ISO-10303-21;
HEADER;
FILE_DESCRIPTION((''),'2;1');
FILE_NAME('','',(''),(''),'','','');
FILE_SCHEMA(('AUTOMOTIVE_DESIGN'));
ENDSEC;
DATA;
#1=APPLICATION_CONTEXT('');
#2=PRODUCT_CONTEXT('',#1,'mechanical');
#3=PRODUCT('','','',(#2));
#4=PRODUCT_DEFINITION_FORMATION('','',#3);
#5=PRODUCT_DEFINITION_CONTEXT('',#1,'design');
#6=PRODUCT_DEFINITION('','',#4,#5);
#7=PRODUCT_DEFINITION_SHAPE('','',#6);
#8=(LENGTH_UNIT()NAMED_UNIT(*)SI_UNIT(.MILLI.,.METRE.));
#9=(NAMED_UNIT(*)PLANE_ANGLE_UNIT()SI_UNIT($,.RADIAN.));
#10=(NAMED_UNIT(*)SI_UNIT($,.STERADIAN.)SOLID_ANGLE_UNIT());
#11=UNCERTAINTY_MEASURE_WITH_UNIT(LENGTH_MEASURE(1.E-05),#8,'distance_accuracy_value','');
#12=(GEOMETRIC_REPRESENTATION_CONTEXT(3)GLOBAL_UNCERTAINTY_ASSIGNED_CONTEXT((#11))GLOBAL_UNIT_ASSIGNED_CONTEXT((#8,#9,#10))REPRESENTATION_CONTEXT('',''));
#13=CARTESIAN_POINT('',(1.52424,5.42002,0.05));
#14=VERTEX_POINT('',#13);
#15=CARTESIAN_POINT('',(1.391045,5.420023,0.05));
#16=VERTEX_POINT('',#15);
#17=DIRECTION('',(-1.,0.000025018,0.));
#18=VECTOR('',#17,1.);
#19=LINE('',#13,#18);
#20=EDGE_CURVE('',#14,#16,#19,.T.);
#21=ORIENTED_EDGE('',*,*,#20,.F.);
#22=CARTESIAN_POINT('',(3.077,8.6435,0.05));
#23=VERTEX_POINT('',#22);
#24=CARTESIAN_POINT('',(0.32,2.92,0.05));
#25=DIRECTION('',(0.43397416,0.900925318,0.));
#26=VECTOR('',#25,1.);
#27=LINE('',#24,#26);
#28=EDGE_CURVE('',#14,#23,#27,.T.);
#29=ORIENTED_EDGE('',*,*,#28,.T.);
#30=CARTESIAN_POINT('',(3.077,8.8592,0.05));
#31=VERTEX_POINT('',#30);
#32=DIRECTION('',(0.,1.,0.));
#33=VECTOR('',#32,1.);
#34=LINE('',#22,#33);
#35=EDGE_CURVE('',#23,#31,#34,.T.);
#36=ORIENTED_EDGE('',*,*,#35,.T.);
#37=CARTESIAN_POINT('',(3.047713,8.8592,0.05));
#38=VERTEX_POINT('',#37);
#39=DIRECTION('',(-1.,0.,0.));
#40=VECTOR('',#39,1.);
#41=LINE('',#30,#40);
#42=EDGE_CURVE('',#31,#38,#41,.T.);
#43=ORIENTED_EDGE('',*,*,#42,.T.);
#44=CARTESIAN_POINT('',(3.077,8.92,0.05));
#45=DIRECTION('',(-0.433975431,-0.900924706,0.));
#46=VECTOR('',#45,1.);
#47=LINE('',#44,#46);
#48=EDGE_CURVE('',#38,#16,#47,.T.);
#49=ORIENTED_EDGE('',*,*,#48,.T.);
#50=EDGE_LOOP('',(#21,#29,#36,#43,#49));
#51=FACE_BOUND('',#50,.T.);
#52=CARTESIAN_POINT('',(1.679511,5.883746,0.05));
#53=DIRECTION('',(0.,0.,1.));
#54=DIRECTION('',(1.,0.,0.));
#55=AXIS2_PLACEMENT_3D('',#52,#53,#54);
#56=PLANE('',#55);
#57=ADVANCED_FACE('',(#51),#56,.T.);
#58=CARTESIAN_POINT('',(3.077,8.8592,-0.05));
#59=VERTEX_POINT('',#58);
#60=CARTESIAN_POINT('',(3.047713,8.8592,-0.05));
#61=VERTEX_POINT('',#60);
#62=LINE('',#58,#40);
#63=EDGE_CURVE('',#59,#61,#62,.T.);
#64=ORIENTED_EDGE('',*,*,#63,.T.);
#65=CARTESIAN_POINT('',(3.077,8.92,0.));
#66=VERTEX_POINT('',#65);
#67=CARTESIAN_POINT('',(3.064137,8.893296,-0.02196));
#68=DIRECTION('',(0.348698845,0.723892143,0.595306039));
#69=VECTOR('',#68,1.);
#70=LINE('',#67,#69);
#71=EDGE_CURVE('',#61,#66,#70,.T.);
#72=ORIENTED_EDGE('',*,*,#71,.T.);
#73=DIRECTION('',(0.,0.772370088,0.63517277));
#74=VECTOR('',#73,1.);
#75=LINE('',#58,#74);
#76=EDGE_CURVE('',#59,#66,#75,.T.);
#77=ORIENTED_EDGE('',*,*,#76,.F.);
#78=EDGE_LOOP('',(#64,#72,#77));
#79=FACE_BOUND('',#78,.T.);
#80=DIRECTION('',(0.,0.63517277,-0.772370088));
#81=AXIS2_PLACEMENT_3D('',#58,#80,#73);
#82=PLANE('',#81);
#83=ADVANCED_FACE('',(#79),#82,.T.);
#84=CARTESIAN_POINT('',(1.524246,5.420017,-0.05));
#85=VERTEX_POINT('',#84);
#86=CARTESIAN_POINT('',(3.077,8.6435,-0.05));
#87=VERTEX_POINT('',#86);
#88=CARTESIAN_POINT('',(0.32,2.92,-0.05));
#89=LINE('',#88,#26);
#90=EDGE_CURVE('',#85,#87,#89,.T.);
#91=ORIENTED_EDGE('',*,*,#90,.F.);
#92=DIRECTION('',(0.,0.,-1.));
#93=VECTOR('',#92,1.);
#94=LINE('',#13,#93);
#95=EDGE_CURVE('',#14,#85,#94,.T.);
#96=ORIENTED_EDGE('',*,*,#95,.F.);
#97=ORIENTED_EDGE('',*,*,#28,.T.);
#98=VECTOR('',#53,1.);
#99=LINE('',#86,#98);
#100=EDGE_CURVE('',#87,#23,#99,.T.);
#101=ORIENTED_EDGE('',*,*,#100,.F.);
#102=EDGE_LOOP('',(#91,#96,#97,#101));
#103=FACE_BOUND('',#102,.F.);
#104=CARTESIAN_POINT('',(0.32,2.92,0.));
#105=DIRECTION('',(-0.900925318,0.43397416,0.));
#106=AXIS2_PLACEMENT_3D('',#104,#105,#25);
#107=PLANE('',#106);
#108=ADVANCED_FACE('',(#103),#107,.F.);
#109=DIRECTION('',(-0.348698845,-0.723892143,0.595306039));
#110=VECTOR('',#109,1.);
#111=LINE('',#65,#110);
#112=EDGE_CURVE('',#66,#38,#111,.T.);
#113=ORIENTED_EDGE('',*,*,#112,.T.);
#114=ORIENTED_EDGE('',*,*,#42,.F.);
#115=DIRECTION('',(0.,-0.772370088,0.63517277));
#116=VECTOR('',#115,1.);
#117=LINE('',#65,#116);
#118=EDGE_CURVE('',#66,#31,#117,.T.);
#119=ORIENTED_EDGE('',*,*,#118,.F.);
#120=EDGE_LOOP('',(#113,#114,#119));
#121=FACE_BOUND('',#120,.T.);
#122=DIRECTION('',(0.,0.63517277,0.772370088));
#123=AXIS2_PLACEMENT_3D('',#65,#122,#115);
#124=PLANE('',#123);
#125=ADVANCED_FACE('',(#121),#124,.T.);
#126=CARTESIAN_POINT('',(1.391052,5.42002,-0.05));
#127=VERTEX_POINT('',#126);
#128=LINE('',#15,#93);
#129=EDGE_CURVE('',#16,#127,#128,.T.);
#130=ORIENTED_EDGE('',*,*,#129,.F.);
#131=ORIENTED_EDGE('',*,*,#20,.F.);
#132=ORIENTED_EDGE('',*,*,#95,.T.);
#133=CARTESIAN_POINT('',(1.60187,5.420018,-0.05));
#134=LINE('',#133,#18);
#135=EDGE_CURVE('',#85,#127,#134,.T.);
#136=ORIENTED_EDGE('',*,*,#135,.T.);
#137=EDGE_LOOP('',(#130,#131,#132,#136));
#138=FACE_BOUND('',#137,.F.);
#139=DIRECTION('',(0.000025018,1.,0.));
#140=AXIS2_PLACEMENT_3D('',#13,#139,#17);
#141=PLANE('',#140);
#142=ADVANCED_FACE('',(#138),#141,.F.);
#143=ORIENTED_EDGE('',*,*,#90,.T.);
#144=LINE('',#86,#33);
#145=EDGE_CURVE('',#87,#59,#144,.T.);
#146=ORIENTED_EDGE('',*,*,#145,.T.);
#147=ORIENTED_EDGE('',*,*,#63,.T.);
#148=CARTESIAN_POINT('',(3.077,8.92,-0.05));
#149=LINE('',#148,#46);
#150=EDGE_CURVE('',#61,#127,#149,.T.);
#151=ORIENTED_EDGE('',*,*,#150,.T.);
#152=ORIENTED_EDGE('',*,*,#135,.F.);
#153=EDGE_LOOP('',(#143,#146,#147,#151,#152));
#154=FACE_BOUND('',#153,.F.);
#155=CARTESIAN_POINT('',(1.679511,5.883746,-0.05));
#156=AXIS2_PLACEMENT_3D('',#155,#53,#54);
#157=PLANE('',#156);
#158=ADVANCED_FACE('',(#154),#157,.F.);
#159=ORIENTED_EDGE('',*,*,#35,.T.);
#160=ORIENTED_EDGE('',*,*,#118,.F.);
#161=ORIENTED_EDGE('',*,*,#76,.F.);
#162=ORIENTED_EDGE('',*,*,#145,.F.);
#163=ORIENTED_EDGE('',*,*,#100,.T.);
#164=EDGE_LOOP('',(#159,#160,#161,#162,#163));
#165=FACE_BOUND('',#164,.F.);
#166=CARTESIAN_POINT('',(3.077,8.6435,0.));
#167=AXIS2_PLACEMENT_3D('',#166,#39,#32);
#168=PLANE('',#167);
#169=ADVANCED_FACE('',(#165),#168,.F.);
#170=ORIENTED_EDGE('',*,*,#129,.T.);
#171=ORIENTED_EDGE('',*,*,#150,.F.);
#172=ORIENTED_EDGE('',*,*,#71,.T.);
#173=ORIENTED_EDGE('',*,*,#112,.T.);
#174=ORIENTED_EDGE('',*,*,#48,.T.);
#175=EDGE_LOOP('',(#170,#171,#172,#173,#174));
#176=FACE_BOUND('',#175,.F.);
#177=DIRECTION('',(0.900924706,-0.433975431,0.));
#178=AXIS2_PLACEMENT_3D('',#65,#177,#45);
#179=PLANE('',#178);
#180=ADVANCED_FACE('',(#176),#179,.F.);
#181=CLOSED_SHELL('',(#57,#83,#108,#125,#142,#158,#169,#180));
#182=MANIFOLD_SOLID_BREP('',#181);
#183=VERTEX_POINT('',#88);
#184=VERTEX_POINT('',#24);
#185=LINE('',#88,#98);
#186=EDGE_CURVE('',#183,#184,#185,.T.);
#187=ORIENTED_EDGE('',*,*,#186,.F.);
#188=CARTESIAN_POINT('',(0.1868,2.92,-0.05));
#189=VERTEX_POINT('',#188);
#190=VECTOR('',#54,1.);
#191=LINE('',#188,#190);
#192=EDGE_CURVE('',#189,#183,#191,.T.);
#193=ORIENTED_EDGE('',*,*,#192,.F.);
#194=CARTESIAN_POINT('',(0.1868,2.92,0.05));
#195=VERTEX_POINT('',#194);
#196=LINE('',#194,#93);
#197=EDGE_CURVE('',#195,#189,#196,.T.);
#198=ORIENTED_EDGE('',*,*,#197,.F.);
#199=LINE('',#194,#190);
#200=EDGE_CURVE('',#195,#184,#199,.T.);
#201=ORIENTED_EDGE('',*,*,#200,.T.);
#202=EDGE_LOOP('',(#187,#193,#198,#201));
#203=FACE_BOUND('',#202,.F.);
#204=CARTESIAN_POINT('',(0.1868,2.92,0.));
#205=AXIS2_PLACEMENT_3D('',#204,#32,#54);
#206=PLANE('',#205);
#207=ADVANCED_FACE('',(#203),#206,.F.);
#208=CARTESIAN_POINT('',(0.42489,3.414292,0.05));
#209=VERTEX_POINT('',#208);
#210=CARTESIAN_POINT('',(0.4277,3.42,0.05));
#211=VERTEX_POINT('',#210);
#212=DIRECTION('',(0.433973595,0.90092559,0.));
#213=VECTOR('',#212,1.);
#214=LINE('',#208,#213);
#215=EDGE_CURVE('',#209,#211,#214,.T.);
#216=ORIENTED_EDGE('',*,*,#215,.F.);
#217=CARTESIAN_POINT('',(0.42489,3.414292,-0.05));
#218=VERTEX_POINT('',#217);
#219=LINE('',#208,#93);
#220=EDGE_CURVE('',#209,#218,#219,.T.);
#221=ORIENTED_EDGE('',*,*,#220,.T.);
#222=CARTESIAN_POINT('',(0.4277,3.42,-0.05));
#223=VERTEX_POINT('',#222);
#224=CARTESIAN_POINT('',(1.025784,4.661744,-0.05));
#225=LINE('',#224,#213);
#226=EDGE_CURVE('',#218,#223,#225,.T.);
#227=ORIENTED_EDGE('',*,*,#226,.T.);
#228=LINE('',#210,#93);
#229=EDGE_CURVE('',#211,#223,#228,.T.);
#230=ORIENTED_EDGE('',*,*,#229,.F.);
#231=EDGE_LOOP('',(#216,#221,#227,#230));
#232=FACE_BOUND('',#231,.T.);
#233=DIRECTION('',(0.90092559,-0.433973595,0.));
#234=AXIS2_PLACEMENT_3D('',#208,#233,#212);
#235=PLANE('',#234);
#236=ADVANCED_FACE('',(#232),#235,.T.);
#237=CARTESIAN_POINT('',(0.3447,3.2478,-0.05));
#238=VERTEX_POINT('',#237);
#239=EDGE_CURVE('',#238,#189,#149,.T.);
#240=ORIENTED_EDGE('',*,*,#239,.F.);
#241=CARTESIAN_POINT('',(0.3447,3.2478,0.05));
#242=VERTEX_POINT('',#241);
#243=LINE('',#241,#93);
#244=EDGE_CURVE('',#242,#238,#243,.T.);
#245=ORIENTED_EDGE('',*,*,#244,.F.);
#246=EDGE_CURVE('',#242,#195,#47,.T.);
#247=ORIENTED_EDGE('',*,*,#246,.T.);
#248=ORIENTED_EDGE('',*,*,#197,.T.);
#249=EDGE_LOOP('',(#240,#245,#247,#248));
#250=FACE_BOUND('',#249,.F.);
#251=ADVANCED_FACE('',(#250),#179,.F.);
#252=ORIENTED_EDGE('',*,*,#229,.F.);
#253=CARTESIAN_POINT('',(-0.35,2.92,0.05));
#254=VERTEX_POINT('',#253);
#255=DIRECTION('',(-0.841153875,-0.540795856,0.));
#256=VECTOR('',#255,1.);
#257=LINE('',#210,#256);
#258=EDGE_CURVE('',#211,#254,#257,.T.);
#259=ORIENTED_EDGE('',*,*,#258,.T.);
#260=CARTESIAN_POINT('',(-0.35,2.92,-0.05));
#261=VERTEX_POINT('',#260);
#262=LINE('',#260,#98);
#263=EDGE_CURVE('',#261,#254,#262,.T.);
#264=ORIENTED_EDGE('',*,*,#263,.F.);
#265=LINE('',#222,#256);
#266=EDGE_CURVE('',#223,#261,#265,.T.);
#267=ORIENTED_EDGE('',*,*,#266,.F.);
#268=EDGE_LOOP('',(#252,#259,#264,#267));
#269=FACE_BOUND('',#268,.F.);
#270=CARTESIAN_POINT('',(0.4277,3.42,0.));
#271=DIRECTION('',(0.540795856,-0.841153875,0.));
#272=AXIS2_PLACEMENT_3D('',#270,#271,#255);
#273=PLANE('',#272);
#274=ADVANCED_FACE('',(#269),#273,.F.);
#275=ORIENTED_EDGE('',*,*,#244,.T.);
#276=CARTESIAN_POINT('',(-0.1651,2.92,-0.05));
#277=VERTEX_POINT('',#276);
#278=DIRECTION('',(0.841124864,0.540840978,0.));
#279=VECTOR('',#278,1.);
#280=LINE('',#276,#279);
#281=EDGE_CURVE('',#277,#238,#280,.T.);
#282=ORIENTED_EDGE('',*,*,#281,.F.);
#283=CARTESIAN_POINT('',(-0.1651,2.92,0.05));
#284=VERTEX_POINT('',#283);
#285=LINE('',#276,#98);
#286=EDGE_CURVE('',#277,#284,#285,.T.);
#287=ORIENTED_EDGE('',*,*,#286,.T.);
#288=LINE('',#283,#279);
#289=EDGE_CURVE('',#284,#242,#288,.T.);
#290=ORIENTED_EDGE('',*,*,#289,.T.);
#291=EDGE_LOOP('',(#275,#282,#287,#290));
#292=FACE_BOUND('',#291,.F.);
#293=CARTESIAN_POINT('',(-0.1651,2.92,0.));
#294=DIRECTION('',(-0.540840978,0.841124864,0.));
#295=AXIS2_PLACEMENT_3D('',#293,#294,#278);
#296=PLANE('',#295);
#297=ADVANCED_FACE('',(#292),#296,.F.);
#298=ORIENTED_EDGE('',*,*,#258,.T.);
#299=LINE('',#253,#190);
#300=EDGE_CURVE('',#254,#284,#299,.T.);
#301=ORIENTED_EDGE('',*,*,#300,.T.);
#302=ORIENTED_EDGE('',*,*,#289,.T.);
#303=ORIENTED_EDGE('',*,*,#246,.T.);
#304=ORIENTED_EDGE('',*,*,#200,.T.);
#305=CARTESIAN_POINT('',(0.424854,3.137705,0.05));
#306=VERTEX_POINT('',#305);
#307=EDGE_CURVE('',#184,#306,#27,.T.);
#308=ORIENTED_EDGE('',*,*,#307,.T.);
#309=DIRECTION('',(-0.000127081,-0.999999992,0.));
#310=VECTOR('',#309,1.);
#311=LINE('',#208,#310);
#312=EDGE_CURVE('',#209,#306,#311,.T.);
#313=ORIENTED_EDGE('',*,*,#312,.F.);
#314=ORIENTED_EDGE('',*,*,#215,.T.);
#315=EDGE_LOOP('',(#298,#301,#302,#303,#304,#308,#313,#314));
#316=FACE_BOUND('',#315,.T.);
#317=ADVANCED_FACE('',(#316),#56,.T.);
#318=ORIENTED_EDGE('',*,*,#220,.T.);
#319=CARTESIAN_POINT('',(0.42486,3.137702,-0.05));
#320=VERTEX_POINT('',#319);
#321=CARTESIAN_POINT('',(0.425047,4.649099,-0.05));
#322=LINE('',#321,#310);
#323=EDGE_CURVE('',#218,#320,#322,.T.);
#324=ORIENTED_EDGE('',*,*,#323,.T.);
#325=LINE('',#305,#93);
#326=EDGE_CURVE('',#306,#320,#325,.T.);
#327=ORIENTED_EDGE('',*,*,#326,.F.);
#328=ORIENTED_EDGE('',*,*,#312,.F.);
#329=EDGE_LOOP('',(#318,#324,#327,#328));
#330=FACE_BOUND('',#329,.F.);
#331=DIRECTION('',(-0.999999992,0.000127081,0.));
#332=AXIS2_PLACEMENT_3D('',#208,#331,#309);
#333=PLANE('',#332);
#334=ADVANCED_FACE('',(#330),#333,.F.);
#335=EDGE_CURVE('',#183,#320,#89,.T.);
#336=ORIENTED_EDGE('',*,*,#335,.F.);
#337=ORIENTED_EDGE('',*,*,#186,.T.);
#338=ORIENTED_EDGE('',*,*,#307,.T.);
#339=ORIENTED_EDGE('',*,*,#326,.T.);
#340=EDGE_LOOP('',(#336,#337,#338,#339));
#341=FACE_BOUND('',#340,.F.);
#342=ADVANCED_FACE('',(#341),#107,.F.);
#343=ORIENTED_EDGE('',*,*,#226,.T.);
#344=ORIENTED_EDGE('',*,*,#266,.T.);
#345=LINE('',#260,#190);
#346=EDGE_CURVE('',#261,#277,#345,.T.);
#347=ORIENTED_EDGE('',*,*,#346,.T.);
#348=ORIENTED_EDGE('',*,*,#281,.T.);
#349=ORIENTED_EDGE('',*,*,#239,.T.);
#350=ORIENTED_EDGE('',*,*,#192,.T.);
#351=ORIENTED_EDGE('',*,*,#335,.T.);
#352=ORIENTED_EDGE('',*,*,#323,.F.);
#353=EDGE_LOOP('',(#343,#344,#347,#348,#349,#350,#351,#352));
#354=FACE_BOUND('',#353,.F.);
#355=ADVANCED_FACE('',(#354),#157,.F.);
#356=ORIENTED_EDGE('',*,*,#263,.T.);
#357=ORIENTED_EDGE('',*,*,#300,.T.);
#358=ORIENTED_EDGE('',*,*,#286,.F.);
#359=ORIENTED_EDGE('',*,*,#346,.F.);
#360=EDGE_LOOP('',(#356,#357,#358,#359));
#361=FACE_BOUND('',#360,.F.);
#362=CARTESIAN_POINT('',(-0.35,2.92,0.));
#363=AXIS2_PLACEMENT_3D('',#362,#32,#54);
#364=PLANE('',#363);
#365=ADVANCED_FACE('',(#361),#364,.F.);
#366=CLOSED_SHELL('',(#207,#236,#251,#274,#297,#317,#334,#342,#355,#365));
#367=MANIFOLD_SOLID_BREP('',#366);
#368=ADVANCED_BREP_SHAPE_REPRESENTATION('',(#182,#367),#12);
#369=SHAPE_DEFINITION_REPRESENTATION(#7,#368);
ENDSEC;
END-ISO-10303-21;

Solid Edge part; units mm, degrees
sketch "Sketch1" plane through (0, 0, 0) normal (0, 0, 1) x (1, 0, 0)
  line L0 (0.1868, 2.92) -> (0.32, 2.92)
  line L1 (0.32, 2.92) -> (3.077, 8.6435)
  line L2 (3.077, 8.6435) -> (3.077, 8.92)
  line L3 (3.077, 8.92) -> (0.1868, 2.92)
  dimension "D1" = 0.12
  dimension "D2" = 6
extrude "Protrusion1" add sketch "Sketch1" along normal mid plane 0.1
sketch "Sketch2" plane through (0, 0, 0) normal (0, 0, 1) x (1, 0, 0)
  line L0 (0.4277, 3.42) -> (-0.35, 2.92)
  line L1 (-0.35, 2.92) -> (-0.1651, 2.92)
  line L2 (-0.1651, 2.92) -> (0.3447, 3.2478)
  line L3 (0.4277, 3.42) -> (0.3447, 3.2478)
  dimension "D1" = 0.1
  dimension "D2" = 0.1
  dimension "D3" = 0.5
extrude "Ausprägung_2" add sketch "Sketch2" along normal mid plane 0.1
sketch "Sketch3" plane through (3.077, 8.7598, 0) normal (1, 0, 0) x (0, 0, -1)
  line L0 (0.05, 0.0994) -> (0, 0.1602)
  line L1 (0, 0.1602) -> (-0.05, 0.0994)
  line L2 (-0.05, 0.1966) -> (-0.05, 0.0994)
  line L3 (-0.05, 0.1966) -> (0.05, 0.1966)
  line L4 (0.05, 0.1966) -> (0.05, 0.0994)
extrude "Cutout1" cut sketch "Sketch3" against normal through all
sketch "Sketch4" plane through (1.3635, 5.8896, 0.05) normal (0, 0, 1) x (0.4339736, 0.9009256, 0)
  line L0 (-2.6374, -0.2286) -> (-2.8866, -0.3486)
  line L1 (-2.8866, -0.3486) -> (-0.3533, -0.3486)
  line L2 (-0.3533, -0.3486) -> (-0.4111, -0.2286)
  line L3 (-2.6374, -0.2286) -> (-0.4111, -0.2286)
extrude "Cutout2" cut sketch "Sketch4" against normal through all
